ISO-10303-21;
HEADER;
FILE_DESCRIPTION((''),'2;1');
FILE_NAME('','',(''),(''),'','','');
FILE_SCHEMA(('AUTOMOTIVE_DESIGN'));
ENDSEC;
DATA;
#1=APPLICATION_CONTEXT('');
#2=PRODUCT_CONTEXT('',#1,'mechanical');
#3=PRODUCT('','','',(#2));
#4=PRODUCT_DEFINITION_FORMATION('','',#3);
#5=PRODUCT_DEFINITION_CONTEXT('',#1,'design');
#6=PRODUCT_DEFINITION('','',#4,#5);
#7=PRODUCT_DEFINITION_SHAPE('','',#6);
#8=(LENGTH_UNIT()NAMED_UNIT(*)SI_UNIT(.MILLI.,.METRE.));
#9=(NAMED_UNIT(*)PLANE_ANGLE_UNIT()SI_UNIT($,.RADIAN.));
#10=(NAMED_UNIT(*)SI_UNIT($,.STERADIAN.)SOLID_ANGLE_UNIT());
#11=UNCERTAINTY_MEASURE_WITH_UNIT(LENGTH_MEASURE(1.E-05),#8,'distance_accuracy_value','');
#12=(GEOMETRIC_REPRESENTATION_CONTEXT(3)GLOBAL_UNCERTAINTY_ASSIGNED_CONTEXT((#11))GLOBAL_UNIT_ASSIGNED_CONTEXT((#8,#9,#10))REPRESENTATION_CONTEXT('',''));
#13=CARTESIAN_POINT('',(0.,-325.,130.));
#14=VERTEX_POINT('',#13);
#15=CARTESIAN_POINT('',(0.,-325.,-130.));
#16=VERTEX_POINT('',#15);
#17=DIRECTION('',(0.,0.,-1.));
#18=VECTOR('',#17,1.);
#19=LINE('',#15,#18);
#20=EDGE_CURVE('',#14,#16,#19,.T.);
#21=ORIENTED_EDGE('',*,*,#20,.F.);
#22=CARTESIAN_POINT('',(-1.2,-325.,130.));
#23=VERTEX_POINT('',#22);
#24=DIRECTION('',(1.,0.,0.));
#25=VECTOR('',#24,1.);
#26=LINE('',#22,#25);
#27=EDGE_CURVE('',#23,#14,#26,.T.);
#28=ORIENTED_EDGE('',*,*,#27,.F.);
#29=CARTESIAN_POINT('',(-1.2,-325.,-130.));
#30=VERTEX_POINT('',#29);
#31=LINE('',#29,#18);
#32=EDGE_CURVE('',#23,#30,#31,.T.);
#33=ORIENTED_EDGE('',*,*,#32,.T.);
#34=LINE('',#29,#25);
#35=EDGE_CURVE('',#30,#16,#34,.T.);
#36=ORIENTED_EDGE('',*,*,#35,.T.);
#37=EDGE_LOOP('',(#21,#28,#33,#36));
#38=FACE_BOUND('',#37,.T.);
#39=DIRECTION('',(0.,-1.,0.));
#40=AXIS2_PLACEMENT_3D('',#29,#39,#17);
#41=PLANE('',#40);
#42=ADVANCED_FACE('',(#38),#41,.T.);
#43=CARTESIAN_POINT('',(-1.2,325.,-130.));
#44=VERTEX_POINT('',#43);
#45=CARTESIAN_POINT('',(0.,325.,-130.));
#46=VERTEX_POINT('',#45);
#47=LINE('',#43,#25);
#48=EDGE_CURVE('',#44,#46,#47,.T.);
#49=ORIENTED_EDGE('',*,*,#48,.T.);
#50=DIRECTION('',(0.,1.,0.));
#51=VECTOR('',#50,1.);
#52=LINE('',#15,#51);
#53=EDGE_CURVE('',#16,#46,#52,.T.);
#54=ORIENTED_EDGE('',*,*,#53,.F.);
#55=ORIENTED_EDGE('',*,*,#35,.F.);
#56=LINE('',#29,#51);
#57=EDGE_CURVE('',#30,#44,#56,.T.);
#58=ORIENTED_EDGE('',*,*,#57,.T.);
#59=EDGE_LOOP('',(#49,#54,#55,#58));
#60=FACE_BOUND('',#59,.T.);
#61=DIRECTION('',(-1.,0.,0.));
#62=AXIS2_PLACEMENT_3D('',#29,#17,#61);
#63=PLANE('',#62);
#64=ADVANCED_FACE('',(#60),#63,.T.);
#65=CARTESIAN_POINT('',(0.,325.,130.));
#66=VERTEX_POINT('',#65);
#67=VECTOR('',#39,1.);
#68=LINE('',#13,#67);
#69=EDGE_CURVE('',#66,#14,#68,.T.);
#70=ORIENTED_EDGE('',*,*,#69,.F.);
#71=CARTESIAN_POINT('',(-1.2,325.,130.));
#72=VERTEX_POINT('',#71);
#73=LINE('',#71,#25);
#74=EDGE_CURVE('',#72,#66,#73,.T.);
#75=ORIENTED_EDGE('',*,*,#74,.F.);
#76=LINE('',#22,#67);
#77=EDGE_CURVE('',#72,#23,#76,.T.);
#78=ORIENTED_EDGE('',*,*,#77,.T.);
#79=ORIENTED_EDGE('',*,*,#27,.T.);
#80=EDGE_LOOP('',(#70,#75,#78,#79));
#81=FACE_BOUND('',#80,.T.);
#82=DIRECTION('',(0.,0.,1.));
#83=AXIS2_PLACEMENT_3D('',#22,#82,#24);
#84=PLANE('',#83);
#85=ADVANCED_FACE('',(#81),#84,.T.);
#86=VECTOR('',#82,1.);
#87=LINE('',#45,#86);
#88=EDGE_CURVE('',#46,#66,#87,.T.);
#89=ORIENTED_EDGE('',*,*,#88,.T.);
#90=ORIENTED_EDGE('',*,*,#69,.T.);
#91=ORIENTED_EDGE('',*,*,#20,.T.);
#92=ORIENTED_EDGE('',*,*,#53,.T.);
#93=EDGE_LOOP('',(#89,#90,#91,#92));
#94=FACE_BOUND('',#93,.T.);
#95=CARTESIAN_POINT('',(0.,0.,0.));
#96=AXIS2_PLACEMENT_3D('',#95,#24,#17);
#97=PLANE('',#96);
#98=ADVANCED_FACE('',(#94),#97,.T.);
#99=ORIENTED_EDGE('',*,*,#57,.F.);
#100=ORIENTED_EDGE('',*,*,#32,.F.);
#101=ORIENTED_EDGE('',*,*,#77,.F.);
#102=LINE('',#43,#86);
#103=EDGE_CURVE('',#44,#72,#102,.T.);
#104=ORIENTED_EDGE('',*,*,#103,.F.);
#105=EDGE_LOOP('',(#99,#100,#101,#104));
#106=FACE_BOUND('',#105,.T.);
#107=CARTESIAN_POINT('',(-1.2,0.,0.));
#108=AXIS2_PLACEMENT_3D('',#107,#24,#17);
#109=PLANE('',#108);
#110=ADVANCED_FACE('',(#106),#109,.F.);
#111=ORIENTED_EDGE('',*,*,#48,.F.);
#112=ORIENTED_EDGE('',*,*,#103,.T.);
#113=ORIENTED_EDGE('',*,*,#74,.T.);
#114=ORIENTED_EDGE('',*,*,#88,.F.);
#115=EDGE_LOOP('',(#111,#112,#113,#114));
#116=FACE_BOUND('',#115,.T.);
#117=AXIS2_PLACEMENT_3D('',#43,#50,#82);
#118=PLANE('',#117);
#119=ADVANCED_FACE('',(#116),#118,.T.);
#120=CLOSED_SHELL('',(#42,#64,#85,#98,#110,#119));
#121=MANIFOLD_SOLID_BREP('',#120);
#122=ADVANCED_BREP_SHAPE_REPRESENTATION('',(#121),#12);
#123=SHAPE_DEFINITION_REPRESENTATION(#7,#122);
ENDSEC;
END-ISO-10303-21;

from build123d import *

# Parameters (mm, degrees)
SKETCH1_W          = 260
SKETCH1_H          = 650
BASE_FLANGE1_DEPTH = 1.2


# Sheet-metal steps are written as plain solids
with BuildPart() as part:
    # Sketch1 → Base-Flange1 (new body)
    with BuildSketch(Plane(origin=(0, 0, 0), x_dir=(0, 0, -1), z_dir=(1, 0, 0))):
        Rectangle(SKETCH1_W, SKETCH1_H)
    extrude(amount=-BASE_FLANGE1_DEPTH)


solid = part.part
